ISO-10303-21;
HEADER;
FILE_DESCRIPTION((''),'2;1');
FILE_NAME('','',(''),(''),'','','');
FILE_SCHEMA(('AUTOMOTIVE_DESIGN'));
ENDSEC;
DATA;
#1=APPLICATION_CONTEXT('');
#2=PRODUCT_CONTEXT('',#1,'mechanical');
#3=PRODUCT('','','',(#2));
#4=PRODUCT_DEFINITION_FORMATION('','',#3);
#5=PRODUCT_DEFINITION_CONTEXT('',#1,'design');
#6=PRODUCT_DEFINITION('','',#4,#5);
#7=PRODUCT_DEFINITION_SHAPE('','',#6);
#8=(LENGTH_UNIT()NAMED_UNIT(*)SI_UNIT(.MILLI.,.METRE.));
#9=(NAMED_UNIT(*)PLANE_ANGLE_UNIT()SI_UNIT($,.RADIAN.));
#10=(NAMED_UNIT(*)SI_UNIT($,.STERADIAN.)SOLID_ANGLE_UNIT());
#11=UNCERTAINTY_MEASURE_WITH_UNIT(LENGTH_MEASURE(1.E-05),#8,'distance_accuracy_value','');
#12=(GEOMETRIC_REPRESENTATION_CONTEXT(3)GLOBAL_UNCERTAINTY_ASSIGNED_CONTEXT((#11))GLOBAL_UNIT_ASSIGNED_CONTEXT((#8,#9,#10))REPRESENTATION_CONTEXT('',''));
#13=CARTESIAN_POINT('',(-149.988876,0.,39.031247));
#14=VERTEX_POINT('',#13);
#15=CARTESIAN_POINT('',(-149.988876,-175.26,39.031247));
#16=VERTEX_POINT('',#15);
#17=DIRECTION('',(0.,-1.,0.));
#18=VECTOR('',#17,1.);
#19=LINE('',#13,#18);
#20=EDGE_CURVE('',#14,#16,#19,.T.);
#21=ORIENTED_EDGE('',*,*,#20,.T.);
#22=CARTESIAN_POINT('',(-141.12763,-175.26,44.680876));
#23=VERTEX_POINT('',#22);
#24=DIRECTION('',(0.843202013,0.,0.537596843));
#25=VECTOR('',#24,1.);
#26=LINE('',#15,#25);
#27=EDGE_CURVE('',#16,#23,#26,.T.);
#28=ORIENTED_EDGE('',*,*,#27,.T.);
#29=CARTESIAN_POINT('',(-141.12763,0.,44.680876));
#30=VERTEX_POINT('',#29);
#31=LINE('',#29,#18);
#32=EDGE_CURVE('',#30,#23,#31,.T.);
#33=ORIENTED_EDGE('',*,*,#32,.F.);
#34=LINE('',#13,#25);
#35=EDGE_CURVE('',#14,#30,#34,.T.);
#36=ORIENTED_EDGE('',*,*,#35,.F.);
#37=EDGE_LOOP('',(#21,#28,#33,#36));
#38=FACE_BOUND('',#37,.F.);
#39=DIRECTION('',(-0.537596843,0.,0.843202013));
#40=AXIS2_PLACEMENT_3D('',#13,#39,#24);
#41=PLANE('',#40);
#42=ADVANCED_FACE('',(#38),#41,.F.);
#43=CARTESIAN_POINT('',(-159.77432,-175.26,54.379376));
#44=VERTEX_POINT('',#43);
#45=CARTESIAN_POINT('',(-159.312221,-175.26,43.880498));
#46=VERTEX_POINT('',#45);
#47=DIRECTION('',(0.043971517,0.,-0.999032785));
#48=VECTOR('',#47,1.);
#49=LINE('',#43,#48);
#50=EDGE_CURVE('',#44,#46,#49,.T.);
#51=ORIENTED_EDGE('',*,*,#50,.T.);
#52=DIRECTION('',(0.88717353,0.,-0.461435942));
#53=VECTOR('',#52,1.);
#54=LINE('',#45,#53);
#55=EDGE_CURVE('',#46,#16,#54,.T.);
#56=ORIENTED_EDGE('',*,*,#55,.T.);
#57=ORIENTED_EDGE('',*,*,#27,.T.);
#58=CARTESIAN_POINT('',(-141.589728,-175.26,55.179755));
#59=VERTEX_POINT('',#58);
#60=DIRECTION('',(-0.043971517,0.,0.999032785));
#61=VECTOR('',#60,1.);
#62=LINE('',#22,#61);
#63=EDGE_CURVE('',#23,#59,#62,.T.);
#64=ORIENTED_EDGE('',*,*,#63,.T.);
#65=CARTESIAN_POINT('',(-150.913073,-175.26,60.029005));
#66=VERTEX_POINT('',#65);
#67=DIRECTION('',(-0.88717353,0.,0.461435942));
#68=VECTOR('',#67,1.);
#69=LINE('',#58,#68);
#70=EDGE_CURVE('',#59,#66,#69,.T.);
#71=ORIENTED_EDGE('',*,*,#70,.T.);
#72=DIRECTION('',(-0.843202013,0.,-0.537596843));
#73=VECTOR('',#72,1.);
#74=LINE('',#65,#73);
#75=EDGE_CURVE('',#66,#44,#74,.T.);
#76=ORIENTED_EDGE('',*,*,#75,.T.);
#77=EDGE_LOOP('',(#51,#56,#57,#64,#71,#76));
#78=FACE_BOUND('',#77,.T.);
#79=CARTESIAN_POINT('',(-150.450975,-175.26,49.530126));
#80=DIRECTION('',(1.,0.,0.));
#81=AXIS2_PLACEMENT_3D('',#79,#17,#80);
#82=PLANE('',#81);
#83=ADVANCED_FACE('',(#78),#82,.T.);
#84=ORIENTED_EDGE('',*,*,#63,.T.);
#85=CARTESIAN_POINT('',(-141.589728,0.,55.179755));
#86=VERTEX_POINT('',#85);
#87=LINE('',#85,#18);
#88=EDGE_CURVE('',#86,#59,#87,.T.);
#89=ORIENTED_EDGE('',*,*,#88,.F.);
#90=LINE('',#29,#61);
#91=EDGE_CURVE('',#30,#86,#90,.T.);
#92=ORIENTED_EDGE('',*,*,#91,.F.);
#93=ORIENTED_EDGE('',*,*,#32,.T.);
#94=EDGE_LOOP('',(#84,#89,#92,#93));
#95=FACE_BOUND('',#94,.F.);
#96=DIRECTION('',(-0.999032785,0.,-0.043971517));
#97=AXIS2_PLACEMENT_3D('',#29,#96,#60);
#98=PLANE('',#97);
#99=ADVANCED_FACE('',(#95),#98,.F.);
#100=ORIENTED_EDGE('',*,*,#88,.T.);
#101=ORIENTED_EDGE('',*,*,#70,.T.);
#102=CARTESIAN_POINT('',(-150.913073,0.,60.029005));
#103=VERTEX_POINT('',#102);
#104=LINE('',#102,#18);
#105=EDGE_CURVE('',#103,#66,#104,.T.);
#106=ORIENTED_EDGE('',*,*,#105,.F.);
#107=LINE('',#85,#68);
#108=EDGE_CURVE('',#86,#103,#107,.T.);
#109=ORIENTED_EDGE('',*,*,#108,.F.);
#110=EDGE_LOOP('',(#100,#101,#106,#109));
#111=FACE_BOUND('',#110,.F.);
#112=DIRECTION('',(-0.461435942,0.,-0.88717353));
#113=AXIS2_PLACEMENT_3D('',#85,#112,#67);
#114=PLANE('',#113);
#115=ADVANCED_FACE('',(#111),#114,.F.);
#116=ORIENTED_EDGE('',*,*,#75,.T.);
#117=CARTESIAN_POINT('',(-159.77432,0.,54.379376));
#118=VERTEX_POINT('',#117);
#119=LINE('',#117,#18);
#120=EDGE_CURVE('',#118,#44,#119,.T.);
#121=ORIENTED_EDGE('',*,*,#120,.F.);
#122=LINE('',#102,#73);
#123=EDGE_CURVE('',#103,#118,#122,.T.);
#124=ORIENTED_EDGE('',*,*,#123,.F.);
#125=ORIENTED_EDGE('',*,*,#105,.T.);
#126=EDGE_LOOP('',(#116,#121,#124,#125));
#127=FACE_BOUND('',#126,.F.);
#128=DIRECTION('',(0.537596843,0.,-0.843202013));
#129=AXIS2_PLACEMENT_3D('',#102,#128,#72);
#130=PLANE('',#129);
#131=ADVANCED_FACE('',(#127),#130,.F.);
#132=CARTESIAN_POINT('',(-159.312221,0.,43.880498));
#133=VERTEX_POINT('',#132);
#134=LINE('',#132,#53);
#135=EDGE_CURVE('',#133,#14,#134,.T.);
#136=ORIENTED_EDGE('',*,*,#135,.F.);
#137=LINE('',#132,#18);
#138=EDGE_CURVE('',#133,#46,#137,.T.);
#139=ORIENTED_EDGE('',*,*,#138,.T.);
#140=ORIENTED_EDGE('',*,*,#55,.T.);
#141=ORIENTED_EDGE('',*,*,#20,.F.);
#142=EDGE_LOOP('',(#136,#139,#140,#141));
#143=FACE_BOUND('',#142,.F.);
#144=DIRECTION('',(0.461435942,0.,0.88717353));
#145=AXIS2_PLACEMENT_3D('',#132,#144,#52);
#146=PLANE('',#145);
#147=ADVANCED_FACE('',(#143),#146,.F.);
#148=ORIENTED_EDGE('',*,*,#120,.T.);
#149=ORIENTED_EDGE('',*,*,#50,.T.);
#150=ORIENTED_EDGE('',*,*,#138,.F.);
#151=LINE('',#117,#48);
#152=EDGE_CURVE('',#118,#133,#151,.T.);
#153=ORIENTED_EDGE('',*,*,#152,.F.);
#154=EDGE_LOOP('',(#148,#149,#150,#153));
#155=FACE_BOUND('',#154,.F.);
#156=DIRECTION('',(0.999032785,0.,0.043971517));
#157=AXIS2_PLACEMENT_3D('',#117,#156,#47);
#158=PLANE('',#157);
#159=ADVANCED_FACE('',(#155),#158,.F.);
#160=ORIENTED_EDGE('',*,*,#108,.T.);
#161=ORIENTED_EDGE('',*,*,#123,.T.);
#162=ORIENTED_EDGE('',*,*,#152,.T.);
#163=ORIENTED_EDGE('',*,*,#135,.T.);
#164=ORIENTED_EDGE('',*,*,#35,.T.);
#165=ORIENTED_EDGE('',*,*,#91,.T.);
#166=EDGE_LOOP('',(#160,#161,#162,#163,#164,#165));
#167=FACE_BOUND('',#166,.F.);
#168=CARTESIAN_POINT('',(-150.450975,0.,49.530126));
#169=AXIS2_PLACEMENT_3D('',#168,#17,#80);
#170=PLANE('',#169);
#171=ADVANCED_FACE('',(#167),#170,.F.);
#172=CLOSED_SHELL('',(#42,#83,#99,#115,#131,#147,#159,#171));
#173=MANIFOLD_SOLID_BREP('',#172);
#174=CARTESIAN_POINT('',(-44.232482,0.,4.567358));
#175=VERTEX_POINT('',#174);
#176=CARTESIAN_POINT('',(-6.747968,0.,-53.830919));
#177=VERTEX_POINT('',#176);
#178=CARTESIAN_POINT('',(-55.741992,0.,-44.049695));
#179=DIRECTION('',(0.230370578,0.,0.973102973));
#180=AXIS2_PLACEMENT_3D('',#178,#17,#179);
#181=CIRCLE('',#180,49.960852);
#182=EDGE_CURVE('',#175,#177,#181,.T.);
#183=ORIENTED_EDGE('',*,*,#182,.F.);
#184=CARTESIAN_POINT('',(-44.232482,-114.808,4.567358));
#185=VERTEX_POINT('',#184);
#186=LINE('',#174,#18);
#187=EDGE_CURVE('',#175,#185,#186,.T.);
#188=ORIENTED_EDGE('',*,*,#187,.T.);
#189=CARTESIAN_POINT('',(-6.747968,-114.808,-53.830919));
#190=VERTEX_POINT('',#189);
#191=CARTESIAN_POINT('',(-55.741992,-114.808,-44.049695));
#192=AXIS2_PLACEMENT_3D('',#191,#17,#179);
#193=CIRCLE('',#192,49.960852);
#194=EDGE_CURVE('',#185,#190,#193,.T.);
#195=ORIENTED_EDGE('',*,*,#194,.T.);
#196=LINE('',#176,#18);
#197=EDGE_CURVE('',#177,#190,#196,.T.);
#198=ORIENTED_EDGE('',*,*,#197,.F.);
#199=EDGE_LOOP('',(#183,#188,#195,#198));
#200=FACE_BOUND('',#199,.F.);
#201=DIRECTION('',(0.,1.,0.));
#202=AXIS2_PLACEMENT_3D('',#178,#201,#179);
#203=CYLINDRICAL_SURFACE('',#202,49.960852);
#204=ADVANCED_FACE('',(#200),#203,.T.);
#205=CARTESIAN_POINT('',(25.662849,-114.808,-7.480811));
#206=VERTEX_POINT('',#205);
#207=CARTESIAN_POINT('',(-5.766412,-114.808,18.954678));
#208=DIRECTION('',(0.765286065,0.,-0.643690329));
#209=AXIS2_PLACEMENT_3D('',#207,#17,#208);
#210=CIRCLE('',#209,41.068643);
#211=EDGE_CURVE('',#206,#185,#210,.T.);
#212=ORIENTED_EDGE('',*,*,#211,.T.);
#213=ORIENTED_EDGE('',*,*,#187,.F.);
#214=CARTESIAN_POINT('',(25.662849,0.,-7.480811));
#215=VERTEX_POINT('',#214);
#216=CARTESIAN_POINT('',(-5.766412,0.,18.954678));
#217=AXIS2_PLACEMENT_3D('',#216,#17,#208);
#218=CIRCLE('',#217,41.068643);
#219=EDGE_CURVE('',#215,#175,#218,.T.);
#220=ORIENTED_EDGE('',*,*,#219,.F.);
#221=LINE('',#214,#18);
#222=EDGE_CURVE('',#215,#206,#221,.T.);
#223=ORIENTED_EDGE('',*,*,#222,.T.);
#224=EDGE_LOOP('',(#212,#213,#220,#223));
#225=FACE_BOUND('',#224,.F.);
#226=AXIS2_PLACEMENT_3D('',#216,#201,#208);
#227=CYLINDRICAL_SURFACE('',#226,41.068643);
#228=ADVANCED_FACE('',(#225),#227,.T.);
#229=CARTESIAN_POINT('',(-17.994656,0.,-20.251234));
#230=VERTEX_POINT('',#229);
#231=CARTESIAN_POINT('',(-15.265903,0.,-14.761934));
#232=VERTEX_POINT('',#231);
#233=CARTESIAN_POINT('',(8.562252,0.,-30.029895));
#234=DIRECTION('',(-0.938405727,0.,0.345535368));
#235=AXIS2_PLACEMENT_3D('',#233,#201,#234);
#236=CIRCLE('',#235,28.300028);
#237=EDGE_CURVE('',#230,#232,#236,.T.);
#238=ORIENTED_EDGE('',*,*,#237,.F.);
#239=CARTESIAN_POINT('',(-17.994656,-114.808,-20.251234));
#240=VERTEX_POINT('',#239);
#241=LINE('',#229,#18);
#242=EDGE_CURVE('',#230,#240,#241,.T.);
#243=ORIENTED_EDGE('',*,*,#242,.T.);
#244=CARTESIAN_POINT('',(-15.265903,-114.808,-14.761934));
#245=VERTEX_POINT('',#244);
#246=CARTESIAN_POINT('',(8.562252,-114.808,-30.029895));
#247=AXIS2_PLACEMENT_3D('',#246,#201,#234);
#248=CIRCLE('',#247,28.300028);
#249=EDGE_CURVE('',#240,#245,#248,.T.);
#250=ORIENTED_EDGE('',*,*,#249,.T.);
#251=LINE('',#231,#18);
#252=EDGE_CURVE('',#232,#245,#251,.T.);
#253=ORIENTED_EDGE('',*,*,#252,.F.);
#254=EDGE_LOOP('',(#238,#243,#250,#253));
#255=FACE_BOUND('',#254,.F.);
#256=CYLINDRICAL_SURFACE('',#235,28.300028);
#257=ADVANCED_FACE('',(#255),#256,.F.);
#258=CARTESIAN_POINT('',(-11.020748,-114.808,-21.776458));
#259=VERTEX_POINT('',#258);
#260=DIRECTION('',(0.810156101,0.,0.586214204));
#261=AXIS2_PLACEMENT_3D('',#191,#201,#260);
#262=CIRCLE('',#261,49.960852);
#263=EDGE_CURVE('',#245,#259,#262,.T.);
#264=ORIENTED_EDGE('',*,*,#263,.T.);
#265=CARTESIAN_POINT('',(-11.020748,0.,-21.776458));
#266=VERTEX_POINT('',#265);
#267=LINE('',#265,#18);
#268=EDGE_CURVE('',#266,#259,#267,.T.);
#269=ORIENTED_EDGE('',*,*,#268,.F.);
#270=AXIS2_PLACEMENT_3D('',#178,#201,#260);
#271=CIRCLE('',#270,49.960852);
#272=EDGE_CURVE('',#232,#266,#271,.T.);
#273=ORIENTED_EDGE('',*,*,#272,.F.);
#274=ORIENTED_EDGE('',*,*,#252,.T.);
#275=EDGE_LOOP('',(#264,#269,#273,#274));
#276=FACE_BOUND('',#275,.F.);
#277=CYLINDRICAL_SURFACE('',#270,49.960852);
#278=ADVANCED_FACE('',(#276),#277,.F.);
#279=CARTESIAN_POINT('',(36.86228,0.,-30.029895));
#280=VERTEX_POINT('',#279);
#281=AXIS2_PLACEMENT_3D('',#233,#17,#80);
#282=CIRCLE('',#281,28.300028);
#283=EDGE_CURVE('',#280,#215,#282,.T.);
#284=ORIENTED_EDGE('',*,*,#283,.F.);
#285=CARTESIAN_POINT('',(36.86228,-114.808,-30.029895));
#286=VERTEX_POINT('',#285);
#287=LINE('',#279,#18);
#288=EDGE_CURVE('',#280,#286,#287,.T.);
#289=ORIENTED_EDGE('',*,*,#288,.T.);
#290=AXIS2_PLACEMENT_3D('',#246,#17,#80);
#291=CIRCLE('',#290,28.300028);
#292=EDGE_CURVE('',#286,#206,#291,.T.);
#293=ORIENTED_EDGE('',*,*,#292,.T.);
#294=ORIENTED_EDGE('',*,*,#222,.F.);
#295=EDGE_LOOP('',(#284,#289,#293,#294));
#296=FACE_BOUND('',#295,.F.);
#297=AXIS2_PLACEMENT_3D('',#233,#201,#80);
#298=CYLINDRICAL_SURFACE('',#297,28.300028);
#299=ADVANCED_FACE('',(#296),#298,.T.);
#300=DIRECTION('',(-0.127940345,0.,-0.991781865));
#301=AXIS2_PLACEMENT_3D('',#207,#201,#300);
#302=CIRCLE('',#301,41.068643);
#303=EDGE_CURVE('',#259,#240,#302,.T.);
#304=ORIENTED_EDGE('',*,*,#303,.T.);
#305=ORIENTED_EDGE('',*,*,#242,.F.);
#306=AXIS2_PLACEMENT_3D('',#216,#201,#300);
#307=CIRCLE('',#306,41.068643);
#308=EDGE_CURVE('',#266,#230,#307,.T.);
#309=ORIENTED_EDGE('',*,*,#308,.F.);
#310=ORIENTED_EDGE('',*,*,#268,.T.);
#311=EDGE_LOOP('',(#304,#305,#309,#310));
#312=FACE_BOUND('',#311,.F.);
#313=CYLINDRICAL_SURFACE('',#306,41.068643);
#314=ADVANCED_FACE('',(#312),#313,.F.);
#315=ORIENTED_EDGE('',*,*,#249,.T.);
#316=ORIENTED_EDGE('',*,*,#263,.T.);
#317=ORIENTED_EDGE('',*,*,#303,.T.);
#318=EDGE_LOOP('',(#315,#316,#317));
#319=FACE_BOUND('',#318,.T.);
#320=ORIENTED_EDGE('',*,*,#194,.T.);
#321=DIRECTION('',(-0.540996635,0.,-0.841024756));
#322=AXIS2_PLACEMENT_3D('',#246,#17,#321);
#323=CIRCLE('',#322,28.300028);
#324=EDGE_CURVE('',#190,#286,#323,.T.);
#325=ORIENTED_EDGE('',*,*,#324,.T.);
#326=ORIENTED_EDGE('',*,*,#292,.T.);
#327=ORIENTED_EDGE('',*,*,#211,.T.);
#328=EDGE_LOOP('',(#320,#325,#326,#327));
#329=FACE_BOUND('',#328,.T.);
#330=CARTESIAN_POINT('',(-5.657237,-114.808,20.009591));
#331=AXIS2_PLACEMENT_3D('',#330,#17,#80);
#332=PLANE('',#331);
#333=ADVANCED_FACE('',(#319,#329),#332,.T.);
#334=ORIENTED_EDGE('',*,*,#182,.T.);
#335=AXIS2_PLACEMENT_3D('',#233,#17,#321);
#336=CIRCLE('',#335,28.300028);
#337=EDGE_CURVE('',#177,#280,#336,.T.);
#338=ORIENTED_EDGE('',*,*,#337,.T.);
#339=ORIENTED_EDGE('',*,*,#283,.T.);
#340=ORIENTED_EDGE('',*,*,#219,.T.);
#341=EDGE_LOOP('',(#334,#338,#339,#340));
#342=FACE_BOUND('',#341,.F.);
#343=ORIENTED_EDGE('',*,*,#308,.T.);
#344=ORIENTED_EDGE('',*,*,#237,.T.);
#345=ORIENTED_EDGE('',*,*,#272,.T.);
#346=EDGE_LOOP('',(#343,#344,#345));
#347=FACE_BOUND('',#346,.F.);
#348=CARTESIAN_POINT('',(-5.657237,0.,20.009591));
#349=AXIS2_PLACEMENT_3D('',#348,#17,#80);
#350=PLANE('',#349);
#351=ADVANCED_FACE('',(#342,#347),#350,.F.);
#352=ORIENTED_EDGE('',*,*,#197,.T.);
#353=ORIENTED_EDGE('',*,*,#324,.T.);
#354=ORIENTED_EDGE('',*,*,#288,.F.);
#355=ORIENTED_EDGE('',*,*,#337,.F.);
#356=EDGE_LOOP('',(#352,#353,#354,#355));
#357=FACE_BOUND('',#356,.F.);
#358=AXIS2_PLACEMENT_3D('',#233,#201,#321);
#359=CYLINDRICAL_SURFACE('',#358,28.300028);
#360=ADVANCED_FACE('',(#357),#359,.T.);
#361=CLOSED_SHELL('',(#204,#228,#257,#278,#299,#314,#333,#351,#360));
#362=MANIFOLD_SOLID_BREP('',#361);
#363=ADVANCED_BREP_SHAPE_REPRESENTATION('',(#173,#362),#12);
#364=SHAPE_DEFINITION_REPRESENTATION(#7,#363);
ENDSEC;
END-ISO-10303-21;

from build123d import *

# Parameters (mm, degrees)
F1_DEPTH = 114.808
F3_DEPTH = 175.26


with BuildPart() as f1:
    # F0 (on Front) → F1 (new body)
    with BuildSketch(Plane.XZ):
        with BuildLine():
            ThreePointArc((25.6628487822, -7.4808111298), (32.8172024659, 4.885626696), (35.3022317211, 18.9546775073))
            ThreePointArc((35.3022317211, 18.9546775073), (-13.0768212072, 59.3674402536), (-44.2324815618, 4.567358293))
            ThreePointArc((-44.2324815618, 4.567358293), (-28.0105833553, -2.4918355408), (-15.2659029767, -14.7619341979))
            ThreePointArc((-15.2659029767, -14.7619341979), (3.6055698097, -2.1673233144), (25.6628487822, -7.4808111298))
        make_face()
        with BuildLine():
            ThreePointArc((-15.2659029767, -14.7619341979), (-28.0105833553, -2.4918355408), (-44.2324815618, 4.567358293))
            ThreePointArc((-44.2324815618, 4.567358293), (-33.9881943736, -10.8809466008), (-17.9946564633, -20.2512341736))
            ThreePointArc((-17.9946564633, -20.2512341736), (-16.7793493314, -17.4324810717), (-15.2659029767, -14.7619341979))
        make_face()
        with BuildLine():
            ThreePointArc((-17.9946564633, -20.2512341736), (-33.9881943736, -10.8809466008), (-44.2324815618, 4.567358293))
            ThreePointArc((-44.2324815618, 4.567358293), (-97.7867193033, -71.0372404865), (-6.7479680143, -53.8309189616))
            ThreePointArc((-6.7479680143, -53.8309189616), (-18.2726677918, -39.0175902767), (-17.9946564633, -20.2512341736))
        make_face()
        with BuildLine():
            ThreePointArc((36.8622799555, -30.0298947841), (33.9082472391, -17.4413242511), (25.6628487822, -7.4808111298))
            ThreePointArc((25.6628487822, -7.4808111298), (9.1457659897, -19.3109785443), (-11.0207481957, -21.7764583426))
            ThreePointArc((-11.0207481957, -21.7764583426), (-7.1086795164, -32.609081399), (-5.781140064, -44.0496951342))
            ThreePointArc((-5.781140064, -44.0496951342), (-6.0234345779, -48.9641405721), (-6.7479680143, -53.8309189616))
            ThreePointArc((-6.7479680143, -53.8309189616), (22.1197578366, -54.8711028862), (36.8622799555, -30.0298947841))
        make_face()
        with BuildLine():
            ThreePointArc((-11.0207481957, -21.7764583426), (9.1457659897, -19.3109785443), (25.6628487822, -7.4808111298))
            ThreePointArc((25.6628487822, -7.4808111298), (3.6055698097, -2.1673233144), (-15.2659029767, -14.7619341979))
            ThreePointArc((-15.2659029767, -14.7619341979), (-12.9991883072, -18.181965113), (-11.0207481957, -21.7764583426))
        make_face()
        with BuildLine():
            ThreePointArc((-11.0207481957, -21.7764583426), (-14.5409053643, -21.165663233), (-17.9946564633, -20.2512341736))
            ThreePointArc((-17.9946564633, -20.2512341736), (-18.2726677918, -39.0175902767), (-6.7479680143, -53.8309189616))
            ThreePointArc((-6.7479680143, -53.8309189616), (-6.0234345779, -48.9641405721), (-5.781140064, -44.0496951342))
            ThreePointArc((-5.781140064, -44.0496951342), (-7.1086795164, -32.609081399), (-11.0207481957, -21.7764583426))
        make_face()
    extrude(amount=F1_DEPTH)


with BuildPart() as f3:
    # F2 (on Front) → F3 (new body)
    with BuildSketch(Plane.XZ):
        Polygon((-149.9888761281, 39.031247435), (-141.1276297332, 44.6808758994), (-141.5897283079, 55.1797546189), (-150.9130732776, 60.0290048739), (-159.7743196725, 54.3793764094), (-159.3122210978, 43.8804976899), align=None)
    extrude(amount=F3_DEPTH)


solid = Compound([f1.part, f3.part])
